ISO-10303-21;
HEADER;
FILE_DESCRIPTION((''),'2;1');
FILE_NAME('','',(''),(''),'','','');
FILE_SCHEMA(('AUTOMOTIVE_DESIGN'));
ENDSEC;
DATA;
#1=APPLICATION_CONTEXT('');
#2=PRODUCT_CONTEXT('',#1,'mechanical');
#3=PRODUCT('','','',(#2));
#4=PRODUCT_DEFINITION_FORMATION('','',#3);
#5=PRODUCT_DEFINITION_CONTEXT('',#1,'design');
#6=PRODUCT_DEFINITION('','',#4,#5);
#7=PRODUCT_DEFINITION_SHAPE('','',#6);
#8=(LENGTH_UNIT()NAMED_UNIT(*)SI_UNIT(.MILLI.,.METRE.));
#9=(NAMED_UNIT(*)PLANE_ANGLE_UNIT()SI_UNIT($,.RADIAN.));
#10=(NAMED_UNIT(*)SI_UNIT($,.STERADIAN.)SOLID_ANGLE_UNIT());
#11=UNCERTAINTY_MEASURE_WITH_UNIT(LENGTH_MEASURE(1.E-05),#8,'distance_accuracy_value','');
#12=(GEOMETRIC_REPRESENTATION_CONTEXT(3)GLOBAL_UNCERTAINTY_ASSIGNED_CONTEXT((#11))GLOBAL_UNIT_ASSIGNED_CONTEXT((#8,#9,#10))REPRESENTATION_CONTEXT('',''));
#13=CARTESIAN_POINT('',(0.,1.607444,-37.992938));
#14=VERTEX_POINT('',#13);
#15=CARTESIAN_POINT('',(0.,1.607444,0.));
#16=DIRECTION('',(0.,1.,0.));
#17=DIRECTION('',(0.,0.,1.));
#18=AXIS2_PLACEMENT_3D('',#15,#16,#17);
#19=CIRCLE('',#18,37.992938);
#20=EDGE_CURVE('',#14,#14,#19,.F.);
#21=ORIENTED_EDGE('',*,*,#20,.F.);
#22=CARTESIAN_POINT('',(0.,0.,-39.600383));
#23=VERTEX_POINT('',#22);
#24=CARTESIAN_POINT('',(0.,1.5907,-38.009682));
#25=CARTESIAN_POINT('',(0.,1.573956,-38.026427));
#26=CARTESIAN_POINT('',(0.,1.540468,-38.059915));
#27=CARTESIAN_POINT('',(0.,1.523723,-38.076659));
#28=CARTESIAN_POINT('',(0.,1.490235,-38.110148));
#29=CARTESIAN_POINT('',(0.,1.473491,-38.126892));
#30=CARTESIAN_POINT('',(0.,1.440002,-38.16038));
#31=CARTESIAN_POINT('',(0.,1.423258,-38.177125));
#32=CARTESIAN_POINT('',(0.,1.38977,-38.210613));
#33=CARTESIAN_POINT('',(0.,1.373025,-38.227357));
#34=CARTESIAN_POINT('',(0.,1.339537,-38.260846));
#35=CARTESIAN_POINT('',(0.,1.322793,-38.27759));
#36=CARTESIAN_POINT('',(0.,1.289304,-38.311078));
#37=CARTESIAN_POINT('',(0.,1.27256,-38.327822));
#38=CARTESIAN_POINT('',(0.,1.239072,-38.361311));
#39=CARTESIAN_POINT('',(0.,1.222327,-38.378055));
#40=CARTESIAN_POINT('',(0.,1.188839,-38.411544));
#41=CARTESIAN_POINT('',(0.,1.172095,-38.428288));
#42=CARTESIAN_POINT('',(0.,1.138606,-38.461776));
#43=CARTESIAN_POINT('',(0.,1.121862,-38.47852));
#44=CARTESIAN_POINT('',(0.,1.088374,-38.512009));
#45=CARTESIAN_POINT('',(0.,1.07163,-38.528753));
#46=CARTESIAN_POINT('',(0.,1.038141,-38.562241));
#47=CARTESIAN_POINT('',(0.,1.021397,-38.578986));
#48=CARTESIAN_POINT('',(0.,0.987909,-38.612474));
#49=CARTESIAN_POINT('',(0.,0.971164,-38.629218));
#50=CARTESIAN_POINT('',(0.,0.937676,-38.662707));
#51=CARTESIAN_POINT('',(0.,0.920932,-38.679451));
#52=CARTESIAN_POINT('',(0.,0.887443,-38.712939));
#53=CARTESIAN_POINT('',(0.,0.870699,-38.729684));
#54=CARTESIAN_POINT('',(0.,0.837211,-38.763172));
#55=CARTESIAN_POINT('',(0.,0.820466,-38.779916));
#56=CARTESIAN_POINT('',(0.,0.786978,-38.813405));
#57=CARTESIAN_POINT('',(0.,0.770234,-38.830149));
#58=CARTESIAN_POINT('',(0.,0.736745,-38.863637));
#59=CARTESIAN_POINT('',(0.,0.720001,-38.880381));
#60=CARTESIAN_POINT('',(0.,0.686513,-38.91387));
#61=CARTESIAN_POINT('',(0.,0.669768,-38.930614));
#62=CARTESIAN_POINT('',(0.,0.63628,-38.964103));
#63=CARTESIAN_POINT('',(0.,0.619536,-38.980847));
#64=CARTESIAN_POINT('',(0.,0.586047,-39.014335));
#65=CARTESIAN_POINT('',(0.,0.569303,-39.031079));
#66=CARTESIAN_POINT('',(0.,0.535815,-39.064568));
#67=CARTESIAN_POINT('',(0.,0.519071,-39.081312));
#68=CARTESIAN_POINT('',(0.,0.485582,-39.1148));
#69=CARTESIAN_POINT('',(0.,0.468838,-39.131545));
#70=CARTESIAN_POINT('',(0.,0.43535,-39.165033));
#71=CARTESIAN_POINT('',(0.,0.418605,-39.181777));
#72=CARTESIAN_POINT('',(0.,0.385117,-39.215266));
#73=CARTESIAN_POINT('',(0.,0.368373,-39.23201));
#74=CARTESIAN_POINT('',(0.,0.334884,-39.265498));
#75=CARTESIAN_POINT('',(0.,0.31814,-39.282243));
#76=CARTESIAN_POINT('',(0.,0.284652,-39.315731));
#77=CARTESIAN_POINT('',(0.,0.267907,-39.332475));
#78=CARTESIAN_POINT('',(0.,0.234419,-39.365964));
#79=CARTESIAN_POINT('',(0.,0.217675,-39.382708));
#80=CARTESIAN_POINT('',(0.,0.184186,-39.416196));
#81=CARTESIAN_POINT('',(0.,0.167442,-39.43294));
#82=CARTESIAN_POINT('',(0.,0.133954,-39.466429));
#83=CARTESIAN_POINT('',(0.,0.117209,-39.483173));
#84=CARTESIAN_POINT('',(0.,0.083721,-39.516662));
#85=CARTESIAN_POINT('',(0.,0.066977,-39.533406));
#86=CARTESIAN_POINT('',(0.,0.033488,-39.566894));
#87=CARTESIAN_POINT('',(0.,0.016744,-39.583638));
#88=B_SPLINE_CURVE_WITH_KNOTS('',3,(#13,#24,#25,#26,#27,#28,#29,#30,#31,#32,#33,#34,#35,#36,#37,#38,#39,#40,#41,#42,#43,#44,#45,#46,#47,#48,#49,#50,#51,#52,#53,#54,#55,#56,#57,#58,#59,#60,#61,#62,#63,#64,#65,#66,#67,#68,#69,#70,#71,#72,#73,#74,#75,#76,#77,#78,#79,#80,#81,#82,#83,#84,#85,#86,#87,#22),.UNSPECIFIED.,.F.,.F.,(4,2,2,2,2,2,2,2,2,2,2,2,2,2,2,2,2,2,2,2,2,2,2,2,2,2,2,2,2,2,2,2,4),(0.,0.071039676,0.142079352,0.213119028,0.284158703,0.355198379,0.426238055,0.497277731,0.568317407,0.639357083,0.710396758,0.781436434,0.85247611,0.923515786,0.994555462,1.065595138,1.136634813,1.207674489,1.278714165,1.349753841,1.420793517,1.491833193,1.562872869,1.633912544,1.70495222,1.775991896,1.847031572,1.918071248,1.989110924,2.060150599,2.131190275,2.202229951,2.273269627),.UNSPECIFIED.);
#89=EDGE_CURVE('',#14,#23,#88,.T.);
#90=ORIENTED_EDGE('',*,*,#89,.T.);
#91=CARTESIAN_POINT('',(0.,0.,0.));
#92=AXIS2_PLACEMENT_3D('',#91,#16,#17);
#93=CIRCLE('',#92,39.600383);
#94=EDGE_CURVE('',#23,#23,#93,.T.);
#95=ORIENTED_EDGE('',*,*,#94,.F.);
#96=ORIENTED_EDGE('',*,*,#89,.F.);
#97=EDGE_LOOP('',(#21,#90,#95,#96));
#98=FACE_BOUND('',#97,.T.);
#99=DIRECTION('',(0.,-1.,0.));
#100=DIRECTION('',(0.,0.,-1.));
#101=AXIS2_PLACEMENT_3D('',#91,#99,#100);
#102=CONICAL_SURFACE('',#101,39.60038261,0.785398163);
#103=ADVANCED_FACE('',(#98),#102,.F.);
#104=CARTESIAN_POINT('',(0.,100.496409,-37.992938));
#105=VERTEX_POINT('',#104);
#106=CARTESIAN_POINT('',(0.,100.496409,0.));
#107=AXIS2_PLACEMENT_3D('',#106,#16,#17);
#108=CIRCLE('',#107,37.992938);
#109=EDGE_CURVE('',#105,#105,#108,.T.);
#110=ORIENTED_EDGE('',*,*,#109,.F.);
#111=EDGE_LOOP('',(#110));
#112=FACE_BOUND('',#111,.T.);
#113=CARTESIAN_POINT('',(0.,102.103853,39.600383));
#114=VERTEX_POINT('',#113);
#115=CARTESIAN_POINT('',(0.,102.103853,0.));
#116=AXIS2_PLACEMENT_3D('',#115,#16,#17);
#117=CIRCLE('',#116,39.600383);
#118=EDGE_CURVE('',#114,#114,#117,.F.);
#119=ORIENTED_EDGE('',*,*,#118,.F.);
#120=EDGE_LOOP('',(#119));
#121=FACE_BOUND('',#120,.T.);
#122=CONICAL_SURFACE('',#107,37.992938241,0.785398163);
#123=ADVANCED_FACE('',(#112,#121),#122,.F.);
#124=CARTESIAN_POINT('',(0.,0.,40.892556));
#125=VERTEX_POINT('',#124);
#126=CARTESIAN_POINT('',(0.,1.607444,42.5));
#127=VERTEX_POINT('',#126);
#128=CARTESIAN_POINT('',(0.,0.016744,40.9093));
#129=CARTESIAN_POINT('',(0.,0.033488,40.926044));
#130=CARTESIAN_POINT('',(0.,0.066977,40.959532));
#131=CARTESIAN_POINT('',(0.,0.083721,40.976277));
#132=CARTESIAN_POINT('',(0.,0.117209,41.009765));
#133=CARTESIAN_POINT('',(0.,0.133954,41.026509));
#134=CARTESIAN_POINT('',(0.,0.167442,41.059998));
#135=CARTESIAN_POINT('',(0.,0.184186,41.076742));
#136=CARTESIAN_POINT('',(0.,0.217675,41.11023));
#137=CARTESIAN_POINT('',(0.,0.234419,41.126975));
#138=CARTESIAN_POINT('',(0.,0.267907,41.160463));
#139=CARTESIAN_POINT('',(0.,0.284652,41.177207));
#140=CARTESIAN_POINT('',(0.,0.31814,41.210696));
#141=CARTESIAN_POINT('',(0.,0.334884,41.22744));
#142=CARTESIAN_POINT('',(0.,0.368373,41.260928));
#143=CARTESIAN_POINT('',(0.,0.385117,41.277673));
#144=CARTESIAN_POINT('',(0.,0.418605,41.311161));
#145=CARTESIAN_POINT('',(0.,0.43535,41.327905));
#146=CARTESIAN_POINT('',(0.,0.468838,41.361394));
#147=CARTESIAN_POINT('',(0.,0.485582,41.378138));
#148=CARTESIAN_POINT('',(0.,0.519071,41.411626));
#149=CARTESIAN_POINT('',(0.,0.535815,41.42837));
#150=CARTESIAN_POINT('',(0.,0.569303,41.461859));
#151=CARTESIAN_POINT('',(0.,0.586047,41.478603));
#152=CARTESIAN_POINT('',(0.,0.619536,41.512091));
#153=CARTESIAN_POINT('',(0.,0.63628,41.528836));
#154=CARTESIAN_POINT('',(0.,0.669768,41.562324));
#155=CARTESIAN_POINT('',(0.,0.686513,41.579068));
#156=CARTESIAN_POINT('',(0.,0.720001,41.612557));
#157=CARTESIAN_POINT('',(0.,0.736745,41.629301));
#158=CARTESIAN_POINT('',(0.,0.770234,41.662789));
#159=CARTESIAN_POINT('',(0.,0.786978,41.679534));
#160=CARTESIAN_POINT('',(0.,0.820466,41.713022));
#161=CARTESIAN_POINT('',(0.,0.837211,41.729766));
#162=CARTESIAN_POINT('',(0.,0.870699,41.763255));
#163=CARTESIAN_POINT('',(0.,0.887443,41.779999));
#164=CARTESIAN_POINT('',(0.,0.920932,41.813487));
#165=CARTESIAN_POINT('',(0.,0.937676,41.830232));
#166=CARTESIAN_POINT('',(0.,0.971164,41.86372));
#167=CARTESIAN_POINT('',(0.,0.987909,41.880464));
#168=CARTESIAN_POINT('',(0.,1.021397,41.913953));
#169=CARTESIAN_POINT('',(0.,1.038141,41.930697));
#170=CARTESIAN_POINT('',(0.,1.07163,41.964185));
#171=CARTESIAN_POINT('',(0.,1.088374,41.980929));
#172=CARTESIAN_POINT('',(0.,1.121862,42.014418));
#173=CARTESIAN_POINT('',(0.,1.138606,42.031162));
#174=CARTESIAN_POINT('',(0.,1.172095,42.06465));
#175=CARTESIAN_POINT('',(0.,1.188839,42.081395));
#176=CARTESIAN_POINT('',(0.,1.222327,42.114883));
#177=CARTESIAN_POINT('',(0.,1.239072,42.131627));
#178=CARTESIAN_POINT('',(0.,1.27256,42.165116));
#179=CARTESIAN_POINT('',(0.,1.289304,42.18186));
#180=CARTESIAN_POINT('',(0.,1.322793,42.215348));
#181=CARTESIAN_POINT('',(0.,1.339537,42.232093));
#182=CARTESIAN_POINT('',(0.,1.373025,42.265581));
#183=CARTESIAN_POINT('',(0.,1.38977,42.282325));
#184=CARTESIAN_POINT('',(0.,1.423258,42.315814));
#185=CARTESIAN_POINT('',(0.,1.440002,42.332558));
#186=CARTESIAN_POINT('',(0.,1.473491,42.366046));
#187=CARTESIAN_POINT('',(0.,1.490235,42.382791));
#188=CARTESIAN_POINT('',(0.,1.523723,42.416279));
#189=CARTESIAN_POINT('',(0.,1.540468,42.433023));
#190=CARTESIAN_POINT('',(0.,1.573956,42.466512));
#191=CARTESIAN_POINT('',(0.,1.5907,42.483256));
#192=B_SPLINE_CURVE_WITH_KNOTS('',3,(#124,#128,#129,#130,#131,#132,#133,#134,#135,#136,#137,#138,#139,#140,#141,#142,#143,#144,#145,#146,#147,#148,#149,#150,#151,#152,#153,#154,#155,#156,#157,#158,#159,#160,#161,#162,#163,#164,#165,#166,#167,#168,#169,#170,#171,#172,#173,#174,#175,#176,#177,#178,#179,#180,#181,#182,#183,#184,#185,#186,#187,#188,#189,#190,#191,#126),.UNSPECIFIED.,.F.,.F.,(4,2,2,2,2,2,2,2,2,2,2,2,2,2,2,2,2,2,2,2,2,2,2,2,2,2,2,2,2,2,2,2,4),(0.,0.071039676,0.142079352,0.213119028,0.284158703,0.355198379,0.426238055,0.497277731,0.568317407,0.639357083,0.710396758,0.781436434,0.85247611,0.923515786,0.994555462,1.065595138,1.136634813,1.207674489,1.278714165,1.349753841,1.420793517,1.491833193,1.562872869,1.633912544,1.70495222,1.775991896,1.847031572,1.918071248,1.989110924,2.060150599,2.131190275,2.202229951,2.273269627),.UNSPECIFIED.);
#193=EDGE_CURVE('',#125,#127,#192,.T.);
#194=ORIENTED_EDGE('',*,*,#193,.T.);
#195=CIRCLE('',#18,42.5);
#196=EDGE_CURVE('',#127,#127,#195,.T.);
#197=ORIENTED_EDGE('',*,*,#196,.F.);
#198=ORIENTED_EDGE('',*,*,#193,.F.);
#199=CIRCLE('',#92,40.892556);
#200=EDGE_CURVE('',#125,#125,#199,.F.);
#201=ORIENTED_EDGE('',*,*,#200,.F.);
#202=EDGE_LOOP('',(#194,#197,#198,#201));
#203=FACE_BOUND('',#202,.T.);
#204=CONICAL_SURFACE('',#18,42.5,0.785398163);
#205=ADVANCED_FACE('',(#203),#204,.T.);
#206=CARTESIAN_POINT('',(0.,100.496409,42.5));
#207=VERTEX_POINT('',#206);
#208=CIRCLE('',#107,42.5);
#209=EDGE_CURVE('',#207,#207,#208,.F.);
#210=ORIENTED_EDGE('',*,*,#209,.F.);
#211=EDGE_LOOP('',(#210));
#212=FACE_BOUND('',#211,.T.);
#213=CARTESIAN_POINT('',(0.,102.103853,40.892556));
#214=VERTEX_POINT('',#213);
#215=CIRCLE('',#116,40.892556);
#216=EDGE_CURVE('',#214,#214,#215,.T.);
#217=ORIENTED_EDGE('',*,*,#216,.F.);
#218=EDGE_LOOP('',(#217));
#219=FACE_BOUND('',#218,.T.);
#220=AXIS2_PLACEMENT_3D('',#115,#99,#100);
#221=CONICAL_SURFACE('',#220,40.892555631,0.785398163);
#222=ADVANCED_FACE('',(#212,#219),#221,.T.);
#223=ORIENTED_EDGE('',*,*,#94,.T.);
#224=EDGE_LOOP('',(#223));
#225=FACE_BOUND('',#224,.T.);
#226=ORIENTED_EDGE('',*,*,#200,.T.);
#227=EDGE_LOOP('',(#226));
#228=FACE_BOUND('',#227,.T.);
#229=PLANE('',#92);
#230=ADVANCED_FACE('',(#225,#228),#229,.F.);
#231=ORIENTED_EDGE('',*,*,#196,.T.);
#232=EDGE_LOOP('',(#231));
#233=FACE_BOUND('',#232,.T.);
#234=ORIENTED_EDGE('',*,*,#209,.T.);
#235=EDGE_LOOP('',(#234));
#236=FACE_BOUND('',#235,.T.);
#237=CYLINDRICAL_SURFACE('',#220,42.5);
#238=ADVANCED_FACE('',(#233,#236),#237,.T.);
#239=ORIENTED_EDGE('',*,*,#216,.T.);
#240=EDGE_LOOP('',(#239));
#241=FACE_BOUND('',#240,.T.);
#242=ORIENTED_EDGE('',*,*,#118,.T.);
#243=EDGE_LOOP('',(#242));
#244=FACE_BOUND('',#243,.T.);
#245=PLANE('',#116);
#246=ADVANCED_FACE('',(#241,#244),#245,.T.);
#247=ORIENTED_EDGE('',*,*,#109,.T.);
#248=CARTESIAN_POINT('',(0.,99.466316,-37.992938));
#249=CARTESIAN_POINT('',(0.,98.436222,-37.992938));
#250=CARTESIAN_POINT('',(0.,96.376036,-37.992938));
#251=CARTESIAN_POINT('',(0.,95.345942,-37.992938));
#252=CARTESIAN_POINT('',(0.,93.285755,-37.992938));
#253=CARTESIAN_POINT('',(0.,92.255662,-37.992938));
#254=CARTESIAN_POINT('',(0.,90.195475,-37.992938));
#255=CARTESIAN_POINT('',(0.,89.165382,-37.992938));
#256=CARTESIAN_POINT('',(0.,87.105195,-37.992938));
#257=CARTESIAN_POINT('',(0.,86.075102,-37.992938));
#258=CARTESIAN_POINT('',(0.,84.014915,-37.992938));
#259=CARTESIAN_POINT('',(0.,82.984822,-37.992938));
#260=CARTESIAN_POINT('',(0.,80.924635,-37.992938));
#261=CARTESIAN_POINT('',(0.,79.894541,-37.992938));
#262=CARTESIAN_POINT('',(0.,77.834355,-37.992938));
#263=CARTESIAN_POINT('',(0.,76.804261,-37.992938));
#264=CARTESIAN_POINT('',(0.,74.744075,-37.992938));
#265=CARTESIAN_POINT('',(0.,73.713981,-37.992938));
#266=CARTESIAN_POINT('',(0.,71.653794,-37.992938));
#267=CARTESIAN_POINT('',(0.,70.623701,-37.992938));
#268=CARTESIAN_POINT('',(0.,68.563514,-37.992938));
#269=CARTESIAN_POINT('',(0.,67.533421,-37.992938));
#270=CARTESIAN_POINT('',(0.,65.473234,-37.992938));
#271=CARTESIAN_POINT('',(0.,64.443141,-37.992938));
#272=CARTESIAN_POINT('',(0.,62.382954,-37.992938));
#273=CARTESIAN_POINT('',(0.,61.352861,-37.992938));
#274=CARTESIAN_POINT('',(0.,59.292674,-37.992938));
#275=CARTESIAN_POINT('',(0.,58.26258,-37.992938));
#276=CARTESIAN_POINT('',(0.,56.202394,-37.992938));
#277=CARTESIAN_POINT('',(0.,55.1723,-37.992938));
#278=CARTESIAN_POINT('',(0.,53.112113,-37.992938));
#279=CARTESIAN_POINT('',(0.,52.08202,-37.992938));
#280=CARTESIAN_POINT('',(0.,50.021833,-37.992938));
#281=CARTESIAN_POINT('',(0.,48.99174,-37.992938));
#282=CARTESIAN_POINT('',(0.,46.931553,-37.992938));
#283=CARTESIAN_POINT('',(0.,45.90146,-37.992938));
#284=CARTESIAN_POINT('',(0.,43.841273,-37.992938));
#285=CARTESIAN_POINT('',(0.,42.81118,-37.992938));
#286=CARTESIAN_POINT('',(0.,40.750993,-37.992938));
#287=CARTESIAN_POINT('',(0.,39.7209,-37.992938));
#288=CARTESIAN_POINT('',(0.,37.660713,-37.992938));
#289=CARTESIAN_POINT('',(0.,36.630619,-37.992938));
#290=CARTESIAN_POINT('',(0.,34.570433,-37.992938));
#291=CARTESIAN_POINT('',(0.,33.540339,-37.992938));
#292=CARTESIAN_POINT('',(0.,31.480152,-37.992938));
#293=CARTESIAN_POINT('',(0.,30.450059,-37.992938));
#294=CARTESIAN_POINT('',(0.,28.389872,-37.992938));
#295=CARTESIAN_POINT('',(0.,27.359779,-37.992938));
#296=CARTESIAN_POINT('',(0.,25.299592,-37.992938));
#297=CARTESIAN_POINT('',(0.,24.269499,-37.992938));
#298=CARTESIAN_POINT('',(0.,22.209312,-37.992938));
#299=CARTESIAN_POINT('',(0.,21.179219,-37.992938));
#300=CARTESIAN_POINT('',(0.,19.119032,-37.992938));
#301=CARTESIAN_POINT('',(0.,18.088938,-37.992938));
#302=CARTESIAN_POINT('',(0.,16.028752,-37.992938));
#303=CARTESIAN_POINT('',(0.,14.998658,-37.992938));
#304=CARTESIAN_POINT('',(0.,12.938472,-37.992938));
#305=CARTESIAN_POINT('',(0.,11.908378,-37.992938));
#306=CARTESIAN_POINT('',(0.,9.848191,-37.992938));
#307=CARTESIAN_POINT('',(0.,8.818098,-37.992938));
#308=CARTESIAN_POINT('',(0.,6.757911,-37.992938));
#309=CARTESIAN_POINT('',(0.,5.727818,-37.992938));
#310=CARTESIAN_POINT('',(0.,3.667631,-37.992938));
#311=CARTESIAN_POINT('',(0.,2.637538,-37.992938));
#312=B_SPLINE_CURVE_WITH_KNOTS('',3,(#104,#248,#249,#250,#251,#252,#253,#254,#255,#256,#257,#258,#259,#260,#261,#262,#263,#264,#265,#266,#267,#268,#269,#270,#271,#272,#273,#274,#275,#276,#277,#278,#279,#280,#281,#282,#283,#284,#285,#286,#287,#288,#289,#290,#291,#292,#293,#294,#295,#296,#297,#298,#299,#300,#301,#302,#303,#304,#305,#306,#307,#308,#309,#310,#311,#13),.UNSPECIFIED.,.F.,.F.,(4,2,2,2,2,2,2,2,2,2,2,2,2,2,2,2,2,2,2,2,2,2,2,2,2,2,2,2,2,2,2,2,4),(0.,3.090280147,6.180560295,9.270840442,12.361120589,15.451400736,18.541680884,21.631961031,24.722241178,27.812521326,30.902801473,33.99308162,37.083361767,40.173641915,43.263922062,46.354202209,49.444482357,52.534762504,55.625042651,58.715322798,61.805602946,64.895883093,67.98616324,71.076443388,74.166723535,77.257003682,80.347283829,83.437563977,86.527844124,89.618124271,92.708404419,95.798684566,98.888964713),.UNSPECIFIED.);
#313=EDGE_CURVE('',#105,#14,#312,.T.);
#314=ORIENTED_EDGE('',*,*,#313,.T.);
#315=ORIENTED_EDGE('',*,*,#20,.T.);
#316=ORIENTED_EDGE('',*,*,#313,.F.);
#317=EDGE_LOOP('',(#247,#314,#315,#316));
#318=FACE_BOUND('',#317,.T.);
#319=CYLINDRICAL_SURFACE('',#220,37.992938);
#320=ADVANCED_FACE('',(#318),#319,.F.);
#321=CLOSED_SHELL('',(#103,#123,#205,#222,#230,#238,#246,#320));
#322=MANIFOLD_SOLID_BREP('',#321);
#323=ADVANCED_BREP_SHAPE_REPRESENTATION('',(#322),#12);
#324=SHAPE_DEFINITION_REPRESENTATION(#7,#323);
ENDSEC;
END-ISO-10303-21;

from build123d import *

# Parameters (mm, degrees)
SKETCH1_R           = 42.5
BOSS_EXTRUDE1_DEPTH = 102.103853451
SKETCH2_R           = 37.992938241
CUT_EXTRUDE1_DEPTH  = 119.480787006
CHAMFER1_SIZE       = 1.607444369


with BuildPart() as part:
    # Sketch1 → Boss-Extrude1 (new body)
    with BuildSketch(Plane(origin=(0, 0, 0), x_dir=(1, 0, 0), z_dir=(0, 1, 0))):
        Circle(SKETCH1_R)
    extrude(amount=BOSS_EXTRUDE1_DEPTH)

    # Sketch2 → Cut-Extrude1 (cut, through all)
    with BuildSketch(Plane(origin=(0, 0, 0), x_dir=(1, 0, 0), z_dir=(0, 1, 0))):
        Circle(SKETCH2_R)
    extrude(amount=CUT_EXTRUDE1_DEPTH, mode=Mode.SUBTRACT)

    # Chamfer1
    chamfer1_edges = [part.edges().sort_by_distance(p)[0] for p in [
        (-37.992938241, 102.103853451, 0),
        (-37.992938241, 0, 0),
        (-42.5, 0, 0),
        (-42.5, 102.103853451, 0),
    ]]
    chamfer(chamfer1_edges, length=CHAMFER1_SIZE)


solid = part.part
